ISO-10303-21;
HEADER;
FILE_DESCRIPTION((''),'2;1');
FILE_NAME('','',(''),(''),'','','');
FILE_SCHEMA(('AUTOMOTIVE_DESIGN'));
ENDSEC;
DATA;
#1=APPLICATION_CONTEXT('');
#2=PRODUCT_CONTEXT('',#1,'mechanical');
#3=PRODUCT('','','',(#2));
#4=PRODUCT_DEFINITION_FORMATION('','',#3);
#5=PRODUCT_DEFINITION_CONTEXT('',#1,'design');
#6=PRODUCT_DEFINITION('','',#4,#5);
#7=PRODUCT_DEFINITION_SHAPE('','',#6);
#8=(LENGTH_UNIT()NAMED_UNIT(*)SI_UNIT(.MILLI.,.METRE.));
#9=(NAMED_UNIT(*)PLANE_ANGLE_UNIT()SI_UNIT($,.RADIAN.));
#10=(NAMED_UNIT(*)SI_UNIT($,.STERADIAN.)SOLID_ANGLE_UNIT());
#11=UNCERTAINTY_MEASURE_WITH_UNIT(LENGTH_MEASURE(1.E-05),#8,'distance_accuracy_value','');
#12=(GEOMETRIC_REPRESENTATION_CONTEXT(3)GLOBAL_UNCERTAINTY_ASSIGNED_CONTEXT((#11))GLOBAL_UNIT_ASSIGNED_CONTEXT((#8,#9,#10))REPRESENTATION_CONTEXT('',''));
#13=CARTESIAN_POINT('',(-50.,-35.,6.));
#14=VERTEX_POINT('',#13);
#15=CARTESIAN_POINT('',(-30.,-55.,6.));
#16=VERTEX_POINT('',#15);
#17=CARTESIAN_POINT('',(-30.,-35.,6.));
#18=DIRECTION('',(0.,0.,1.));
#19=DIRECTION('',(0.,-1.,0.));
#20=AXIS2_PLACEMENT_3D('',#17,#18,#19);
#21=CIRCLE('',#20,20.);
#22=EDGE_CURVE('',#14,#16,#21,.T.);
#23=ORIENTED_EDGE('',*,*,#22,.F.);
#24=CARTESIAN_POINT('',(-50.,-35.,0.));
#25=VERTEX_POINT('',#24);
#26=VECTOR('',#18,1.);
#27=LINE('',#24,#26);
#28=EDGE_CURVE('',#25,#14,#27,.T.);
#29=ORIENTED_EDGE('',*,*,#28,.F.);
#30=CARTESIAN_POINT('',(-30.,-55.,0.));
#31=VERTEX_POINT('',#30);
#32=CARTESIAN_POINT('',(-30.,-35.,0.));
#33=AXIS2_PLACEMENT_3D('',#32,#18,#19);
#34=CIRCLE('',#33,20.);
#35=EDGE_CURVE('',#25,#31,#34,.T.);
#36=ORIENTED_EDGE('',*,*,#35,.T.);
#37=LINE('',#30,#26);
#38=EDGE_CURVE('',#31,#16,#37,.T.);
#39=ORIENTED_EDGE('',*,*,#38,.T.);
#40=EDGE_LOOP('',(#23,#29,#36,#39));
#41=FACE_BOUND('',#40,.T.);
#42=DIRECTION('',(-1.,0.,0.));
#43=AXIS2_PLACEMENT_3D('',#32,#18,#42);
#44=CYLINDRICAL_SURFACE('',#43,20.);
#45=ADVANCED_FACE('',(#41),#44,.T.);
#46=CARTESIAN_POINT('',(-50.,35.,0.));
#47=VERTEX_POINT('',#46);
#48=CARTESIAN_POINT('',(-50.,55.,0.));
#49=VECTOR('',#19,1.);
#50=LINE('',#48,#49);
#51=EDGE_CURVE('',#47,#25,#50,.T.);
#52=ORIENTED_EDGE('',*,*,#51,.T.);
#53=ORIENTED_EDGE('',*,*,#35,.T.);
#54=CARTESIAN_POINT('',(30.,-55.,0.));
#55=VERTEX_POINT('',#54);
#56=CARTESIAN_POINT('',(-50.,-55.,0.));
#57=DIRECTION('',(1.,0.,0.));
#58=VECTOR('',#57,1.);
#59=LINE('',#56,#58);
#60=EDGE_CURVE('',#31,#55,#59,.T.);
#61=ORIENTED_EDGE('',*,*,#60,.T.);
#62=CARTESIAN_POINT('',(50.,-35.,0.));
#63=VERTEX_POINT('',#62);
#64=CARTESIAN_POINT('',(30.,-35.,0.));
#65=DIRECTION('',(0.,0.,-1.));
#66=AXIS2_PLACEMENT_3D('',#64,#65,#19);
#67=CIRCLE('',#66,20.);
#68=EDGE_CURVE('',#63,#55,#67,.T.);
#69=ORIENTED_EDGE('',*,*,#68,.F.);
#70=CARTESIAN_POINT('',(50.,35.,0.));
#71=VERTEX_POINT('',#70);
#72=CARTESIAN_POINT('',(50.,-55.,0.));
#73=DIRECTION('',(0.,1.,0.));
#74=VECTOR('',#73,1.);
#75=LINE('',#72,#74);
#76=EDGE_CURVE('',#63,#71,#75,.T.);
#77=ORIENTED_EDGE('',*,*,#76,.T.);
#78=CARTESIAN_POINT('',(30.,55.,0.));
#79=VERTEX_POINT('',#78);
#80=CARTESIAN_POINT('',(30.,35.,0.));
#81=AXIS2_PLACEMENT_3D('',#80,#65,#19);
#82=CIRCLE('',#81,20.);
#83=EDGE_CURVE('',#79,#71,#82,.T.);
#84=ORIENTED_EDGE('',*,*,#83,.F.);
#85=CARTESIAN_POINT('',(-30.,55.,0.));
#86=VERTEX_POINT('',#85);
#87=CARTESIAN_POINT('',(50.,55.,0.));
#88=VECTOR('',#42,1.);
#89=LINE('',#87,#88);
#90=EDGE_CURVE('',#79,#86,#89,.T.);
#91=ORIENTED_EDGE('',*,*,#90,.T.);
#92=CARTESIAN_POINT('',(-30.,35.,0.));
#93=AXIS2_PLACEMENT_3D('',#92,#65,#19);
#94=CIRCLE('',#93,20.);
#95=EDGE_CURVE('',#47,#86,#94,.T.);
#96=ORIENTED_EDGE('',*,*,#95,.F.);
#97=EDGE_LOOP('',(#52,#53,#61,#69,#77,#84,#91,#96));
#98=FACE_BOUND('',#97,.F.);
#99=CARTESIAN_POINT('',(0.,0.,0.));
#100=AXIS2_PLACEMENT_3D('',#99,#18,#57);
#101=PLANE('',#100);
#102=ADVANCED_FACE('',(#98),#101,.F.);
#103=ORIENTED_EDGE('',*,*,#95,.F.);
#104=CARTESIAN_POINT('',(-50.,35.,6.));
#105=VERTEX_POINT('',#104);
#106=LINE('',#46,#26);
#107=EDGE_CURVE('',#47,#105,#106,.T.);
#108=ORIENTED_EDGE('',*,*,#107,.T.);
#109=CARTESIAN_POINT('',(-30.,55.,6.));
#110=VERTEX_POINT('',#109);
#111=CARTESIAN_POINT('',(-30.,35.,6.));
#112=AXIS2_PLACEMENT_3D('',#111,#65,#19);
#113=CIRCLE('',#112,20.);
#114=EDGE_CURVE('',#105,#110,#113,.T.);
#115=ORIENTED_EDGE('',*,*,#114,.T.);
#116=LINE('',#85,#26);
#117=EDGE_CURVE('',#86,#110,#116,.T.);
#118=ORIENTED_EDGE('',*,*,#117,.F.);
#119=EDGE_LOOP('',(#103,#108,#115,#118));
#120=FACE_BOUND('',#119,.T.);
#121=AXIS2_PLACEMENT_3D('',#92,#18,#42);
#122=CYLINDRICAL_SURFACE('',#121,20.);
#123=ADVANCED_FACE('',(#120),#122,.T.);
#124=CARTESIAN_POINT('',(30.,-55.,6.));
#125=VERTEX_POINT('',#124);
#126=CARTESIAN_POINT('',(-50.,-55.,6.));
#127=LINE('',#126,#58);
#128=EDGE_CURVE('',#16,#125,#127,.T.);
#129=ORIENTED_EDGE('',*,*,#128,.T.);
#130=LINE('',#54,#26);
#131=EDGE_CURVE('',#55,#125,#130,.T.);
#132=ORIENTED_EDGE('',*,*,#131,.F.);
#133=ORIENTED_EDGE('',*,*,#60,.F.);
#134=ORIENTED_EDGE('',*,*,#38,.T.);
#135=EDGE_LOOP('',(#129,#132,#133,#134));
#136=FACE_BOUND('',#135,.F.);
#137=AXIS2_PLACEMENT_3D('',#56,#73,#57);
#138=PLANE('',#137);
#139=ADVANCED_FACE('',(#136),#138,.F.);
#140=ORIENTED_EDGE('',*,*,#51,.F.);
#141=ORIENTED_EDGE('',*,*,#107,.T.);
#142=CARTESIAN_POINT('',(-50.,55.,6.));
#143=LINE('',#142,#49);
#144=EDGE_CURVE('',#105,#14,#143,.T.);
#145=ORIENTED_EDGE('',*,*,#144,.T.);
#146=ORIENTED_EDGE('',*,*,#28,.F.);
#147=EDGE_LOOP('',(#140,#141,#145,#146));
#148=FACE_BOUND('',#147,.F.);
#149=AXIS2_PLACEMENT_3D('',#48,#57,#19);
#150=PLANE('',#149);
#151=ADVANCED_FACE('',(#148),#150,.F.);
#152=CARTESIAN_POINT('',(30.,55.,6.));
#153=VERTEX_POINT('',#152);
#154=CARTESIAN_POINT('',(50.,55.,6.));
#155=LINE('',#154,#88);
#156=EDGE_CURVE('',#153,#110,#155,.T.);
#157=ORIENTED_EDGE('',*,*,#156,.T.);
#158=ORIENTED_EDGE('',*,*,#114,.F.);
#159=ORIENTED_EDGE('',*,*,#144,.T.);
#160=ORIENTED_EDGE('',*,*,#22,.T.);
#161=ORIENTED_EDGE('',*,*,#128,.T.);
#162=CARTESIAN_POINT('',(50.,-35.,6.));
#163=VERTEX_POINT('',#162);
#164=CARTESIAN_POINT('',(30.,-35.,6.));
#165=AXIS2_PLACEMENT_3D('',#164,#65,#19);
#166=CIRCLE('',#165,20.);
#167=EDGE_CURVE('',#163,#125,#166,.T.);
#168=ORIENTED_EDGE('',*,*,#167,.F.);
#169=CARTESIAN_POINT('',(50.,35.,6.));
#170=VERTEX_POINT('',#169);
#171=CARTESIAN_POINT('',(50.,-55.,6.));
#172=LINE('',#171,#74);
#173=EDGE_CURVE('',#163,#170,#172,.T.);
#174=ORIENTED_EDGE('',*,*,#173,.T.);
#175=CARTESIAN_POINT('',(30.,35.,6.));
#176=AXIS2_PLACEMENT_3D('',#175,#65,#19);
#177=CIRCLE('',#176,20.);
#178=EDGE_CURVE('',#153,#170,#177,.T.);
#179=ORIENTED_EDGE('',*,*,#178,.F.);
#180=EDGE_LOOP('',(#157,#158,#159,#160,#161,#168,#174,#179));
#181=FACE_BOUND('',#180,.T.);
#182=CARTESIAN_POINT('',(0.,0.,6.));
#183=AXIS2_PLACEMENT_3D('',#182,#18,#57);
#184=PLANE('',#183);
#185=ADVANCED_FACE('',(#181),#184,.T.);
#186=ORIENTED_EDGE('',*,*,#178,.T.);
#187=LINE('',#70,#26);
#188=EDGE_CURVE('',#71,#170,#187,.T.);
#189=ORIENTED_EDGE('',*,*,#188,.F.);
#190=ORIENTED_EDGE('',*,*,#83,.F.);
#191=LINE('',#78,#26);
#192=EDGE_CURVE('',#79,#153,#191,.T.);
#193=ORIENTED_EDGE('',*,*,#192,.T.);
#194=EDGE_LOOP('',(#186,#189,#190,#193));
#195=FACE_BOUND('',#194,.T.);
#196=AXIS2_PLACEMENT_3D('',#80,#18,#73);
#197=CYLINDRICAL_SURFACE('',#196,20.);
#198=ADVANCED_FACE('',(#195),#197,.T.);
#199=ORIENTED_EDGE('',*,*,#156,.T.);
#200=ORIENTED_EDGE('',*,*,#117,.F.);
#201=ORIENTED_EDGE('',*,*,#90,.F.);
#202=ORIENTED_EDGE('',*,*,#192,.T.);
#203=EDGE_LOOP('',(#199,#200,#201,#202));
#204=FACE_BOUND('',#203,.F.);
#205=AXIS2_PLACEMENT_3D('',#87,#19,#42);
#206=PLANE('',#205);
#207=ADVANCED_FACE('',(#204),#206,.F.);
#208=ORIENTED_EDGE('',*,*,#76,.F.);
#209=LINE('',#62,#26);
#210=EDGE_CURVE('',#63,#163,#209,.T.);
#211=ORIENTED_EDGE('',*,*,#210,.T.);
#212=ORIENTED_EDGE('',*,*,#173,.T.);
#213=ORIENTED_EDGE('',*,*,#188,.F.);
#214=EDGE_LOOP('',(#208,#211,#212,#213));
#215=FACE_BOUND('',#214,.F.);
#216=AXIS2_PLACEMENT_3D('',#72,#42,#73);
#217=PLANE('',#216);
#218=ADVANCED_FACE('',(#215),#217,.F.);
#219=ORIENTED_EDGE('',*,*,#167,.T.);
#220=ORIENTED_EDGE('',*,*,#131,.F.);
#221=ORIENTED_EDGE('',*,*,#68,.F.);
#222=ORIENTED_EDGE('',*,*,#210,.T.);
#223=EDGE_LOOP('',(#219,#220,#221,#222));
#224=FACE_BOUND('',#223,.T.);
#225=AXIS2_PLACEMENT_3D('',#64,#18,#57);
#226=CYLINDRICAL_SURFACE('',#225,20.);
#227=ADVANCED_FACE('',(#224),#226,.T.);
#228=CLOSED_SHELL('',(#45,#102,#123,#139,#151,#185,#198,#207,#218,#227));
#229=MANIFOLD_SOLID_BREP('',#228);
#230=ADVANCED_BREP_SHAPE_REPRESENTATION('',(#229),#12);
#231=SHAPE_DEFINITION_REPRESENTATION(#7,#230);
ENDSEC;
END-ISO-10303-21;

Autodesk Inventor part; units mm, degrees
ref_plane "YZ Plane" through (0, 0, 0) normal (1, 0, 0) x (0, 1, 0)
ref_plane "XZ Plane" through (0, 0, 0) normal (0, 1, 0) x (-1, 0, 0)
ref_plane "XY Plane" through (0, 0, 0) normal (0, 0, 1) x (1, 0, 0)
sketch "Sketch1" plane through (0, 0, 0) normal (0, 0, 1) x (1, 0, 0)
  line L0 (-50, -55) -> (50, -55)
  line L1 (50, -55) -> (50, 55)
  line L2 (50, 55) -> (-50, 55)
  line L3 (-50, 55) -> (-50, -55)
  line L4 (-50, -55) -> (50, 55) construction
  line L5 (50, -55) -> (-50, 55) construction
  point P0 (0, 0)
  dimension "d0" = 100
  dimension "d1" = 110
extrude "Plate1" add sketch "Sketch1" along normal blind 6
fillet "Corner Round1" radius 20 4 edges at (50, -55, 3) (-50, -55, 3) (-50, 55, 3) (50, 55, 3)
sketch "Sketch5" plane through (0, 0, 6) normal (0, 0, 1) x (1, 0, 0)
  line L0 (50, 35) -> (50, -35) projected
  line L1 (50, 25) -> (-50, 25)
  line L2 (-50, -35) -> (-50, 35) projected
  line L3 (-30, 55) -> (30, 55) projected
  point P0 (0, 0)
  dimension "d23" = 30
feature "Fold1" [suppressed]
equation "\"d2\" = Thickness"
equation "\"d24\" = BendReliefWidth"
equation "\"d25\" = BendReliefDepth"
equation "\"d26\" = MinimumRemnant"
equation "\"d27\" = TransitionRadius"
equation "\"d29\" = BendRadius"
equation "\"BendReliefWidth\" = Thickness"
equation "\"BendReliefDepth\" = 0.5 * Thickness"
equation "\"CornerReliefSize\" = 4 * Thickness"
equation "\"MinimumRemnant\" = 2 * Thickness"
equation "\"TransitionRadius\" = BendRadius"
equation "\"JacobiRadiusSize\" = BendRadius"
equation "\"GapSize\" = Thickness"
equation "\"Thickness\" = 6"
equation "\"BendRadius\" = 5"
properties part number "PRS 1200-93 leg plate for filter" material "Stainless Steel"
